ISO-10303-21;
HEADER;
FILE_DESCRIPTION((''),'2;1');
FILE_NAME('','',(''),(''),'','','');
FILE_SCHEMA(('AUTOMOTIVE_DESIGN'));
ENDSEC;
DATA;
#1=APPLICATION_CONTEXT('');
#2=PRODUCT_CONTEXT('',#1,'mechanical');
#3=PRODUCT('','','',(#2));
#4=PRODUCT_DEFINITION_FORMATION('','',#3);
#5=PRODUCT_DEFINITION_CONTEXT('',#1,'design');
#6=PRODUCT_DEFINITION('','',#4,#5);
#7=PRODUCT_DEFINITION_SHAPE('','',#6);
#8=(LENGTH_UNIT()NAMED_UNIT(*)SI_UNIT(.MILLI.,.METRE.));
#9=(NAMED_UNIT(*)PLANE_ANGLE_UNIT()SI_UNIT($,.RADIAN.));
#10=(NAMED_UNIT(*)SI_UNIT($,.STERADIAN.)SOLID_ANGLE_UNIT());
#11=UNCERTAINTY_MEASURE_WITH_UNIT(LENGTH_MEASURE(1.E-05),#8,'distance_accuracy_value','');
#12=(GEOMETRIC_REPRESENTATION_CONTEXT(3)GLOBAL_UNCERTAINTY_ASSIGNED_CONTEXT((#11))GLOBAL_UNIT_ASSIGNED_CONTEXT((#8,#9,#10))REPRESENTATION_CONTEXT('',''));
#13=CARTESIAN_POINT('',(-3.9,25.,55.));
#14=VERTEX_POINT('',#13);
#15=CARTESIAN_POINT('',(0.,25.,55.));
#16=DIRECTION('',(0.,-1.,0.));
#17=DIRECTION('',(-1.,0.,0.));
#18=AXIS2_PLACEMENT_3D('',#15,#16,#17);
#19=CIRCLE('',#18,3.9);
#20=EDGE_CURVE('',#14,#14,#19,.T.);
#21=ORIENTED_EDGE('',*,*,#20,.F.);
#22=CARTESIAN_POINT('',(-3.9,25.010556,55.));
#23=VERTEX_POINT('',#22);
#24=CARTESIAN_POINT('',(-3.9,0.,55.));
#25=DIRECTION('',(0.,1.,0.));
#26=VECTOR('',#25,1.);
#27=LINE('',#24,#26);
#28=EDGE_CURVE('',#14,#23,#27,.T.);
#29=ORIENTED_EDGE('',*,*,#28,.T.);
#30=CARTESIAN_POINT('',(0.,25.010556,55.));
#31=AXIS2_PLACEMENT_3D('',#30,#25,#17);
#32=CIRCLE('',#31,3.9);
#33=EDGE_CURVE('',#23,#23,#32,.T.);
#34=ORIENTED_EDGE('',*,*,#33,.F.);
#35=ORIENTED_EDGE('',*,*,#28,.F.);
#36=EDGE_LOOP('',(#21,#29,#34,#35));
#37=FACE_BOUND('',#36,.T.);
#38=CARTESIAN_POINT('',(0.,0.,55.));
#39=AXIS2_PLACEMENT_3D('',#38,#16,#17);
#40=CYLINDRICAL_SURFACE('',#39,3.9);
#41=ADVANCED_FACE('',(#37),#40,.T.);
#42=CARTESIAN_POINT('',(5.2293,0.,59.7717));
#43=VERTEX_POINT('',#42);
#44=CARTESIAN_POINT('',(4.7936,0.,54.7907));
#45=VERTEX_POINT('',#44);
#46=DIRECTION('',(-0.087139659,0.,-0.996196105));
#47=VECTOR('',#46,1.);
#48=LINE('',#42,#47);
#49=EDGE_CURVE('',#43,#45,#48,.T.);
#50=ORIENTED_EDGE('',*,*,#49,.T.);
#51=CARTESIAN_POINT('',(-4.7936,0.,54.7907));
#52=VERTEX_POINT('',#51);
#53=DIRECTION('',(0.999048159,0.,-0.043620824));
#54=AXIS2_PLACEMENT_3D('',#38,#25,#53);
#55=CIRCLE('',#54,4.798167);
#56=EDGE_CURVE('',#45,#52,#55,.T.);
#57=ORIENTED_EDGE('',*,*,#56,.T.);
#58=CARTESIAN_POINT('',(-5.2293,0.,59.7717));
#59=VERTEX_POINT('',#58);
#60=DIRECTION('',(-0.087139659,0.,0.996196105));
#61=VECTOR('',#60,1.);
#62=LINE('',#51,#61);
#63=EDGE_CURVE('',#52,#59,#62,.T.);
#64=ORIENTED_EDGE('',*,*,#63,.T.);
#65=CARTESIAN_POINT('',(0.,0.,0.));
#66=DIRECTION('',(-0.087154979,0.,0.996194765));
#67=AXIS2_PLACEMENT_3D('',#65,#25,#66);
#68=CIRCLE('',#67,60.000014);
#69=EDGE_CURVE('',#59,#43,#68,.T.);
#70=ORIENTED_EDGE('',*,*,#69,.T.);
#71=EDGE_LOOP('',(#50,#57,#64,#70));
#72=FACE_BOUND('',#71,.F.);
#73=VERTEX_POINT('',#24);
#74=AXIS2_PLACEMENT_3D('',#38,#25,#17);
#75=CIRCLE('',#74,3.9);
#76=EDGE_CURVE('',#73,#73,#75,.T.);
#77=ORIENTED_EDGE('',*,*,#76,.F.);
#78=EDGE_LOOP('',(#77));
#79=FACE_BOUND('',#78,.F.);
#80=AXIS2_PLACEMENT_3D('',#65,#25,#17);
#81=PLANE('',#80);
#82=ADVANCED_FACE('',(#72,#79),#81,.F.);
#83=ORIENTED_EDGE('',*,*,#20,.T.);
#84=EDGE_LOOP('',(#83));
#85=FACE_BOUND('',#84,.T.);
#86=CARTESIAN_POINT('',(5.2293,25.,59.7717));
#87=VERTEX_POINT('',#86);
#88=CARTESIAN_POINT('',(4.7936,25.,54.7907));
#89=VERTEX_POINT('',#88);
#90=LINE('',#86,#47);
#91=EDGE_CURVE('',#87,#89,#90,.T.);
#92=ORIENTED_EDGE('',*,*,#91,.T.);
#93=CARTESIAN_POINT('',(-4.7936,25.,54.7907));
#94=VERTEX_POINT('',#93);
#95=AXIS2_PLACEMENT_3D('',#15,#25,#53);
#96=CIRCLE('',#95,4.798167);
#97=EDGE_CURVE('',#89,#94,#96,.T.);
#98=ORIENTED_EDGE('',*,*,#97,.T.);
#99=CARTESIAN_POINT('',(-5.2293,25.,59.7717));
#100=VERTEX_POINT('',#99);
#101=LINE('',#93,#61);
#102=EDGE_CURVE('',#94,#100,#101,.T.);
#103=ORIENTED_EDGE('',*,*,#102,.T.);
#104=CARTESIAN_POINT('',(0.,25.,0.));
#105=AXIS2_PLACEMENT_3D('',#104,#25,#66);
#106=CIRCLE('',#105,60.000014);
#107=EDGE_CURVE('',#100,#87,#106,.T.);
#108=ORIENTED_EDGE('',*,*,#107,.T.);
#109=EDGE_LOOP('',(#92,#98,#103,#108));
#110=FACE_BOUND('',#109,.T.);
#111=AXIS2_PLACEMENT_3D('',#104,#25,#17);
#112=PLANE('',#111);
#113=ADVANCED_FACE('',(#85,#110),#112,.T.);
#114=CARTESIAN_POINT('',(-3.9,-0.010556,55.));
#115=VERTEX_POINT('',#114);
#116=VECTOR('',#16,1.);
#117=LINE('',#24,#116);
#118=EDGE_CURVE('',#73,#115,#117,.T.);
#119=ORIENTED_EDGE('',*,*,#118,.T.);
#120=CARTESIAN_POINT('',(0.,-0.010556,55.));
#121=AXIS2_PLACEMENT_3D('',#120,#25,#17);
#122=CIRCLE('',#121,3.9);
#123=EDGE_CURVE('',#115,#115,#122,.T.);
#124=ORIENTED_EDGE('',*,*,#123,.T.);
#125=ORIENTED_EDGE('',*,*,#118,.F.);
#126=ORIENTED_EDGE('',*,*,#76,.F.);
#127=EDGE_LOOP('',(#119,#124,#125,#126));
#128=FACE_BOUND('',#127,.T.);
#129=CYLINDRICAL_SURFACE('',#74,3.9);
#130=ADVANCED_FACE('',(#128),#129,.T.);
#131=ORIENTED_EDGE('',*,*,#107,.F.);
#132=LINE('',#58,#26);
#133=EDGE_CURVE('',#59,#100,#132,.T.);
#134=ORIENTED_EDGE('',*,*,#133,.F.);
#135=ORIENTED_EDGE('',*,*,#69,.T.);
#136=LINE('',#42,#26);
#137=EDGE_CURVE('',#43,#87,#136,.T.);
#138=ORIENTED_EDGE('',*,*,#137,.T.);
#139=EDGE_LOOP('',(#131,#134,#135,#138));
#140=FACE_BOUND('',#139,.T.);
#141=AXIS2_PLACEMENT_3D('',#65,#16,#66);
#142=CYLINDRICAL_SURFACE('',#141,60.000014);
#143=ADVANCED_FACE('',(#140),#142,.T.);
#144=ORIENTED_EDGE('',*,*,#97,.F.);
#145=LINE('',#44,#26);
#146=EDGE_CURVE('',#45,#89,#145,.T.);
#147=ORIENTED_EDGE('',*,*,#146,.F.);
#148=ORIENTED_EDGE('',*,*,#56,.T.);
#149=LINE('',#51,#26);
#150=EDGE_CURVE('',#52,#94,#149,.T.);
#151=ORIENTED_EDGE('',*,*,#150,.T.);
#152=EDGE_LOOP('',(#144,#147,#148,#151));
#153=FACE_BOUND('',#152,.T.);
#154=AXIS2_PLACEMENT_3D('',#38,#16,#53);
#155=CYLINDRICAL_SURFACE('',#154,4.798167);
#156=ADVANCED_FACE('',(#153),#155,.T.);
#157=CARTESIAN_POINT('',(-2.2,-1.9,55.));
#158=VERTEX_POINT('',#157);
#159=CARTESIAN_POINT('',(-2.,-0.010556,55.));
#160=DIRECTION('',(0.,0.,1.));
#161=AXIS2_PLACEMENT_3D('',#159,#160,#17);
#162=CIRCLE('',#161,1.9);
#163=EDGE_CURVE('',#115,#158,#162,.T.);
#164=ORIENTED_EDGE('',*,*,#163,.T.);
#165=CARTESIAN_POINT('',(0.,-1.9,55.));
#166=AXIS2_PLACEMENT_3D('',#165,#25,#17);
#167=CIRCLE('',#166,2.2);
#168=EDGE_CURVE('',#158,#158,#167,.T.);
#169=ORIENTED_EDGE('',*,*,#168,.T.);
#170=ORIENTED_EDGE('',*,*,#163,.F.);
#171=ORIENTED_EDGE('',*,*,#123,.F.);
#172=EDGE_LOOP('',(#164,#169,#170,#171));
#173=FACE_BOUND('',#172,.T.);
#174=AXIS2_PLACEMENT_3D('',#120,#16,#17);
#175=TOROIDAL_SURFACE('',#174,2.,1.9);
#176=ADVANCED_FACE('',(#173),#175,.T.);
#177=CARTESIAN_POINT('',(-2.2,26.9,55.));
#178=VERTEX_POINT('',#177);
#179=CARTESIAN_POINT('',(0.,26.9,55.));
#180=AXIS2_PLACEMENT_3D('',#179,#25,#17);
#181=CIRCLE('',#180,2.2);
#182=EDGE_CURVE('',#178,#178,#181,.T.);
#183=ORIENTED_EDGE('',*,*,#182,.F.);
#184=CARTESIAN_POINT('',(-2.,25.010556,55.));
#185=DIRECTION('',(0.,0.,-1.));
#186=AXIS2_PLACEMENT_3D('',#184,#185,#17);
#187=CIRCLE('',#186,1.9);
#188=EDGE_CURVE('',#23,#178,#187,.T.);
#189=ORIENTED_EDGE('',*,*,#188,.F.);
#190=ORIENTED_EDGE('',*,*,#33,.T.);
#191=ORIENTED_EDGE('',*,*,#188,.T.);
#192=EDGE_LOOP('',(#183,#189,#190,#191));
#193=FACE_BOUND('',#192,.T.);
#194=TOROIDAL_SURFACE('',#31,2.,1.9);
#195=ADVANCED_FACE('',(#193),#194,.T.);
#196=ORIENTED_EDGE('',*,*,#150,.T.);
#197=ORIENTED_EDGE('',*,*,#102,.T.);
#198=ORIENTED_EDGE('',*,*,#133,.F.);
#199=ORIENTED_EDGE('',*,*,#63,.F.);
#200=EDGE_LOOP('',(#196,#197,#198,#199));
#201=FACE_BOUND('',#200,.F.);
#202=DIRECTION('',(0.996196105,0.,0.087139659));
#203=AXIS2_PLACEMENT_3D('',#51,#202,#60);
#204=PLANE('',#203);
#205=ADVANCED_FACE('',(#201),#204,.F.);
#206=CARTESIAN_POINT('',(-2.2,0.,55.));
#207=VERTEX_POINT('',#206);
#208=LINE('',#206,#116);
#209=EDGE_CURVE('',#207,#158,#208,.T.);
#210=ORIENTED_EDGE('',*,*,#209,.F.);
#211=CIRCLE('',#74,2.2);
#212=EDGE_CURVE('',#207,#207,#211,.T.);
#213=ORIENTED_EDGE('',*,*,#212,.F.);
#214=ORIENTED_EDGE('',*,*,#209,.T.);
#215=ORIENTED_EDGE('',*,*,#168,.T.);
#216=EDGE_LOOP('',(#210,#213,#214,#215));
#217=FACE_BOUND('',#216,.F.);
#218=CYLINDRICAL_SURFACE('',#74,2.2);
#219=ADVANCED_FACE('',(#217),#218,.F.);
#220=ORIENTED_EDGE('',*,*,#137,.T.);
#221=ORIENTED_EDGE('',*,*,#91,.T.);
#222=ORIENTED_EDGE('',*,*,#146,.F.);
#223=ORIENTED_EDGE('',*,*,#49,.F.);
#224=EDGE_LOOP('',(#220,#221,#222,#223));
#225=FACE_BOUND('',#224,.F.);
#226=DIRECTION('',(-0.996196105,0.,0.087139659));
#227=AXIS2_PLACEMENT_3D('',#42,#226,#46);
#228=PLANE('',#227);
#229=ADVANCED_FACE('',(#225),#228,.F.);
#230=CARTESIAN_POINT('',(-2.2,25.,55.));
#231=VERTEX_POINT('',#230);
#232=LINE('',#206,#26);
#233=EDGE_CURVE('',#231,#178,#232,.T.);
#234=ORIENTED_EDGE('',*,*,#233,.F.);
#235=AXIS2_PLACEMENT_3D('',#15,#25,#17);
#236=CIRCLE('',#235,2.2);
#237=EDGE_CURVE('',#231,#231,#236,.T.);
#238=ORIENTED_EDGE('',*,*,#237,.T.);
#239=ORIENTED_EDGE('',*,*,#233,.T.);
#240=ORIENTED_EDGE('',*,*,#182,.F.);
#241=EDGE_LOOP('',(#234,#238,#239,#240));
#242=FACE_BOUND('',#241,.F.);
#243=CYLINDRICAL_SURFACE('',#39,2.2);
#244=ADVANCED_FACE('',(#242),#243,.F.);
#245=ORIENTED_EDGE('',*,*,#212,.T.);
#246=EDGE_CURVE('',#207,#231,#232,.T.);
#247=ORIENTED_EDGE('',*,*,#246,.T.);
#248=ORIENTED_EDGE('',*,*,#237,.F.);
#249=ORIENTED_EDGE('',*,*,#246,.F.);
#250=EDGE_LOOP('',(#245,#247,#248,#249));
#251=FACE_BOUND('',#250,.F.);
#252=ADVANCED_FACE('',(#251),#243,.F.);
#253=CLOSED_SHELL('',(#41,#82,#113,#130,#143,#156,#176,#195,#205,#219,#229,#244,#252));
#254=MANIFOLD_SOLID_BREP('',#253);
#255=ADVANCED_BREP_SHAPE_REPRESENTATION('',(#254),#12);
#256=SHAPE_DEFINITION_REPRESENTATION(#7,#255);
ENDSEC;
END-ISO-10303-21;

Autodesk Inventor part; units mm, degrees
ref_plane "YZ Plane" through (0, 0, 0) normal (1, 0, 0) x (0, 1, 0)
ref_plane "XZ Plane" through (0, 0, 0) normal (0, 1, 0) x (-1, 0, 0)
ref_plane "XY Plane" through (0, 0, 0) normal (0, 0, 1) x (1, 0, 0)
sketch "Sketch1" plane through (0, 0, 0) normal (0, 1, 0) x (-1, 0, 0)
  circle A0 centre (0, 0) radius 60 construction
  circle A1 centre (0, 0) radius 55 construction
  circle A2 centre (0, 55) radius 2.2
  arc A3 (5.2293, 59.7717) -> (-5.2293, 59.7717) centre (0, 0) ccw
  line L0 (0, 0) -> (5.2293, 59.7717) construction
  line L1 (0, 0) -> (60, 0) construction
  line L2 (0, 0) -> (-5.2293, 59.7717) construction
  line L3 (0, 24.4692) -> (0, -19) construction
  arc A4 (-4.7936, 54.7907) -> (4.7936, 54.7907) centre (0, 55) ccw
  line L4 (4.7936, 54.7907) -> (5.2293, 59.7717)
  line L5 (-5.2293, 59.7717) -> (-4.7936, 54.7907)
  circle A5 centre (0, 55) radius 3.9
  dimension "d0" = 120
  dimension "d1" = 110
  dimension "d2" = 4.4
  dimension "d4" = 10
  dimension "d5" = 5
  dimension "d8" = 7.8
extrude "Extrusion1" add sketch "Sketch1" along normal blind 25 contours L4 A4 L5 A3 | A5
extrude "Extrusion2" add sketch "Sketch1" along normal blind 26.9 and the other way blind 1.9 contours A5
fillet "Fillet1" radius 1.9 2 edges at (3.9, 26.9, 55) (3.9, -1.9, 55)
equation "\"d5\" = 0.5 * d4"
properties part number "Spacer"
